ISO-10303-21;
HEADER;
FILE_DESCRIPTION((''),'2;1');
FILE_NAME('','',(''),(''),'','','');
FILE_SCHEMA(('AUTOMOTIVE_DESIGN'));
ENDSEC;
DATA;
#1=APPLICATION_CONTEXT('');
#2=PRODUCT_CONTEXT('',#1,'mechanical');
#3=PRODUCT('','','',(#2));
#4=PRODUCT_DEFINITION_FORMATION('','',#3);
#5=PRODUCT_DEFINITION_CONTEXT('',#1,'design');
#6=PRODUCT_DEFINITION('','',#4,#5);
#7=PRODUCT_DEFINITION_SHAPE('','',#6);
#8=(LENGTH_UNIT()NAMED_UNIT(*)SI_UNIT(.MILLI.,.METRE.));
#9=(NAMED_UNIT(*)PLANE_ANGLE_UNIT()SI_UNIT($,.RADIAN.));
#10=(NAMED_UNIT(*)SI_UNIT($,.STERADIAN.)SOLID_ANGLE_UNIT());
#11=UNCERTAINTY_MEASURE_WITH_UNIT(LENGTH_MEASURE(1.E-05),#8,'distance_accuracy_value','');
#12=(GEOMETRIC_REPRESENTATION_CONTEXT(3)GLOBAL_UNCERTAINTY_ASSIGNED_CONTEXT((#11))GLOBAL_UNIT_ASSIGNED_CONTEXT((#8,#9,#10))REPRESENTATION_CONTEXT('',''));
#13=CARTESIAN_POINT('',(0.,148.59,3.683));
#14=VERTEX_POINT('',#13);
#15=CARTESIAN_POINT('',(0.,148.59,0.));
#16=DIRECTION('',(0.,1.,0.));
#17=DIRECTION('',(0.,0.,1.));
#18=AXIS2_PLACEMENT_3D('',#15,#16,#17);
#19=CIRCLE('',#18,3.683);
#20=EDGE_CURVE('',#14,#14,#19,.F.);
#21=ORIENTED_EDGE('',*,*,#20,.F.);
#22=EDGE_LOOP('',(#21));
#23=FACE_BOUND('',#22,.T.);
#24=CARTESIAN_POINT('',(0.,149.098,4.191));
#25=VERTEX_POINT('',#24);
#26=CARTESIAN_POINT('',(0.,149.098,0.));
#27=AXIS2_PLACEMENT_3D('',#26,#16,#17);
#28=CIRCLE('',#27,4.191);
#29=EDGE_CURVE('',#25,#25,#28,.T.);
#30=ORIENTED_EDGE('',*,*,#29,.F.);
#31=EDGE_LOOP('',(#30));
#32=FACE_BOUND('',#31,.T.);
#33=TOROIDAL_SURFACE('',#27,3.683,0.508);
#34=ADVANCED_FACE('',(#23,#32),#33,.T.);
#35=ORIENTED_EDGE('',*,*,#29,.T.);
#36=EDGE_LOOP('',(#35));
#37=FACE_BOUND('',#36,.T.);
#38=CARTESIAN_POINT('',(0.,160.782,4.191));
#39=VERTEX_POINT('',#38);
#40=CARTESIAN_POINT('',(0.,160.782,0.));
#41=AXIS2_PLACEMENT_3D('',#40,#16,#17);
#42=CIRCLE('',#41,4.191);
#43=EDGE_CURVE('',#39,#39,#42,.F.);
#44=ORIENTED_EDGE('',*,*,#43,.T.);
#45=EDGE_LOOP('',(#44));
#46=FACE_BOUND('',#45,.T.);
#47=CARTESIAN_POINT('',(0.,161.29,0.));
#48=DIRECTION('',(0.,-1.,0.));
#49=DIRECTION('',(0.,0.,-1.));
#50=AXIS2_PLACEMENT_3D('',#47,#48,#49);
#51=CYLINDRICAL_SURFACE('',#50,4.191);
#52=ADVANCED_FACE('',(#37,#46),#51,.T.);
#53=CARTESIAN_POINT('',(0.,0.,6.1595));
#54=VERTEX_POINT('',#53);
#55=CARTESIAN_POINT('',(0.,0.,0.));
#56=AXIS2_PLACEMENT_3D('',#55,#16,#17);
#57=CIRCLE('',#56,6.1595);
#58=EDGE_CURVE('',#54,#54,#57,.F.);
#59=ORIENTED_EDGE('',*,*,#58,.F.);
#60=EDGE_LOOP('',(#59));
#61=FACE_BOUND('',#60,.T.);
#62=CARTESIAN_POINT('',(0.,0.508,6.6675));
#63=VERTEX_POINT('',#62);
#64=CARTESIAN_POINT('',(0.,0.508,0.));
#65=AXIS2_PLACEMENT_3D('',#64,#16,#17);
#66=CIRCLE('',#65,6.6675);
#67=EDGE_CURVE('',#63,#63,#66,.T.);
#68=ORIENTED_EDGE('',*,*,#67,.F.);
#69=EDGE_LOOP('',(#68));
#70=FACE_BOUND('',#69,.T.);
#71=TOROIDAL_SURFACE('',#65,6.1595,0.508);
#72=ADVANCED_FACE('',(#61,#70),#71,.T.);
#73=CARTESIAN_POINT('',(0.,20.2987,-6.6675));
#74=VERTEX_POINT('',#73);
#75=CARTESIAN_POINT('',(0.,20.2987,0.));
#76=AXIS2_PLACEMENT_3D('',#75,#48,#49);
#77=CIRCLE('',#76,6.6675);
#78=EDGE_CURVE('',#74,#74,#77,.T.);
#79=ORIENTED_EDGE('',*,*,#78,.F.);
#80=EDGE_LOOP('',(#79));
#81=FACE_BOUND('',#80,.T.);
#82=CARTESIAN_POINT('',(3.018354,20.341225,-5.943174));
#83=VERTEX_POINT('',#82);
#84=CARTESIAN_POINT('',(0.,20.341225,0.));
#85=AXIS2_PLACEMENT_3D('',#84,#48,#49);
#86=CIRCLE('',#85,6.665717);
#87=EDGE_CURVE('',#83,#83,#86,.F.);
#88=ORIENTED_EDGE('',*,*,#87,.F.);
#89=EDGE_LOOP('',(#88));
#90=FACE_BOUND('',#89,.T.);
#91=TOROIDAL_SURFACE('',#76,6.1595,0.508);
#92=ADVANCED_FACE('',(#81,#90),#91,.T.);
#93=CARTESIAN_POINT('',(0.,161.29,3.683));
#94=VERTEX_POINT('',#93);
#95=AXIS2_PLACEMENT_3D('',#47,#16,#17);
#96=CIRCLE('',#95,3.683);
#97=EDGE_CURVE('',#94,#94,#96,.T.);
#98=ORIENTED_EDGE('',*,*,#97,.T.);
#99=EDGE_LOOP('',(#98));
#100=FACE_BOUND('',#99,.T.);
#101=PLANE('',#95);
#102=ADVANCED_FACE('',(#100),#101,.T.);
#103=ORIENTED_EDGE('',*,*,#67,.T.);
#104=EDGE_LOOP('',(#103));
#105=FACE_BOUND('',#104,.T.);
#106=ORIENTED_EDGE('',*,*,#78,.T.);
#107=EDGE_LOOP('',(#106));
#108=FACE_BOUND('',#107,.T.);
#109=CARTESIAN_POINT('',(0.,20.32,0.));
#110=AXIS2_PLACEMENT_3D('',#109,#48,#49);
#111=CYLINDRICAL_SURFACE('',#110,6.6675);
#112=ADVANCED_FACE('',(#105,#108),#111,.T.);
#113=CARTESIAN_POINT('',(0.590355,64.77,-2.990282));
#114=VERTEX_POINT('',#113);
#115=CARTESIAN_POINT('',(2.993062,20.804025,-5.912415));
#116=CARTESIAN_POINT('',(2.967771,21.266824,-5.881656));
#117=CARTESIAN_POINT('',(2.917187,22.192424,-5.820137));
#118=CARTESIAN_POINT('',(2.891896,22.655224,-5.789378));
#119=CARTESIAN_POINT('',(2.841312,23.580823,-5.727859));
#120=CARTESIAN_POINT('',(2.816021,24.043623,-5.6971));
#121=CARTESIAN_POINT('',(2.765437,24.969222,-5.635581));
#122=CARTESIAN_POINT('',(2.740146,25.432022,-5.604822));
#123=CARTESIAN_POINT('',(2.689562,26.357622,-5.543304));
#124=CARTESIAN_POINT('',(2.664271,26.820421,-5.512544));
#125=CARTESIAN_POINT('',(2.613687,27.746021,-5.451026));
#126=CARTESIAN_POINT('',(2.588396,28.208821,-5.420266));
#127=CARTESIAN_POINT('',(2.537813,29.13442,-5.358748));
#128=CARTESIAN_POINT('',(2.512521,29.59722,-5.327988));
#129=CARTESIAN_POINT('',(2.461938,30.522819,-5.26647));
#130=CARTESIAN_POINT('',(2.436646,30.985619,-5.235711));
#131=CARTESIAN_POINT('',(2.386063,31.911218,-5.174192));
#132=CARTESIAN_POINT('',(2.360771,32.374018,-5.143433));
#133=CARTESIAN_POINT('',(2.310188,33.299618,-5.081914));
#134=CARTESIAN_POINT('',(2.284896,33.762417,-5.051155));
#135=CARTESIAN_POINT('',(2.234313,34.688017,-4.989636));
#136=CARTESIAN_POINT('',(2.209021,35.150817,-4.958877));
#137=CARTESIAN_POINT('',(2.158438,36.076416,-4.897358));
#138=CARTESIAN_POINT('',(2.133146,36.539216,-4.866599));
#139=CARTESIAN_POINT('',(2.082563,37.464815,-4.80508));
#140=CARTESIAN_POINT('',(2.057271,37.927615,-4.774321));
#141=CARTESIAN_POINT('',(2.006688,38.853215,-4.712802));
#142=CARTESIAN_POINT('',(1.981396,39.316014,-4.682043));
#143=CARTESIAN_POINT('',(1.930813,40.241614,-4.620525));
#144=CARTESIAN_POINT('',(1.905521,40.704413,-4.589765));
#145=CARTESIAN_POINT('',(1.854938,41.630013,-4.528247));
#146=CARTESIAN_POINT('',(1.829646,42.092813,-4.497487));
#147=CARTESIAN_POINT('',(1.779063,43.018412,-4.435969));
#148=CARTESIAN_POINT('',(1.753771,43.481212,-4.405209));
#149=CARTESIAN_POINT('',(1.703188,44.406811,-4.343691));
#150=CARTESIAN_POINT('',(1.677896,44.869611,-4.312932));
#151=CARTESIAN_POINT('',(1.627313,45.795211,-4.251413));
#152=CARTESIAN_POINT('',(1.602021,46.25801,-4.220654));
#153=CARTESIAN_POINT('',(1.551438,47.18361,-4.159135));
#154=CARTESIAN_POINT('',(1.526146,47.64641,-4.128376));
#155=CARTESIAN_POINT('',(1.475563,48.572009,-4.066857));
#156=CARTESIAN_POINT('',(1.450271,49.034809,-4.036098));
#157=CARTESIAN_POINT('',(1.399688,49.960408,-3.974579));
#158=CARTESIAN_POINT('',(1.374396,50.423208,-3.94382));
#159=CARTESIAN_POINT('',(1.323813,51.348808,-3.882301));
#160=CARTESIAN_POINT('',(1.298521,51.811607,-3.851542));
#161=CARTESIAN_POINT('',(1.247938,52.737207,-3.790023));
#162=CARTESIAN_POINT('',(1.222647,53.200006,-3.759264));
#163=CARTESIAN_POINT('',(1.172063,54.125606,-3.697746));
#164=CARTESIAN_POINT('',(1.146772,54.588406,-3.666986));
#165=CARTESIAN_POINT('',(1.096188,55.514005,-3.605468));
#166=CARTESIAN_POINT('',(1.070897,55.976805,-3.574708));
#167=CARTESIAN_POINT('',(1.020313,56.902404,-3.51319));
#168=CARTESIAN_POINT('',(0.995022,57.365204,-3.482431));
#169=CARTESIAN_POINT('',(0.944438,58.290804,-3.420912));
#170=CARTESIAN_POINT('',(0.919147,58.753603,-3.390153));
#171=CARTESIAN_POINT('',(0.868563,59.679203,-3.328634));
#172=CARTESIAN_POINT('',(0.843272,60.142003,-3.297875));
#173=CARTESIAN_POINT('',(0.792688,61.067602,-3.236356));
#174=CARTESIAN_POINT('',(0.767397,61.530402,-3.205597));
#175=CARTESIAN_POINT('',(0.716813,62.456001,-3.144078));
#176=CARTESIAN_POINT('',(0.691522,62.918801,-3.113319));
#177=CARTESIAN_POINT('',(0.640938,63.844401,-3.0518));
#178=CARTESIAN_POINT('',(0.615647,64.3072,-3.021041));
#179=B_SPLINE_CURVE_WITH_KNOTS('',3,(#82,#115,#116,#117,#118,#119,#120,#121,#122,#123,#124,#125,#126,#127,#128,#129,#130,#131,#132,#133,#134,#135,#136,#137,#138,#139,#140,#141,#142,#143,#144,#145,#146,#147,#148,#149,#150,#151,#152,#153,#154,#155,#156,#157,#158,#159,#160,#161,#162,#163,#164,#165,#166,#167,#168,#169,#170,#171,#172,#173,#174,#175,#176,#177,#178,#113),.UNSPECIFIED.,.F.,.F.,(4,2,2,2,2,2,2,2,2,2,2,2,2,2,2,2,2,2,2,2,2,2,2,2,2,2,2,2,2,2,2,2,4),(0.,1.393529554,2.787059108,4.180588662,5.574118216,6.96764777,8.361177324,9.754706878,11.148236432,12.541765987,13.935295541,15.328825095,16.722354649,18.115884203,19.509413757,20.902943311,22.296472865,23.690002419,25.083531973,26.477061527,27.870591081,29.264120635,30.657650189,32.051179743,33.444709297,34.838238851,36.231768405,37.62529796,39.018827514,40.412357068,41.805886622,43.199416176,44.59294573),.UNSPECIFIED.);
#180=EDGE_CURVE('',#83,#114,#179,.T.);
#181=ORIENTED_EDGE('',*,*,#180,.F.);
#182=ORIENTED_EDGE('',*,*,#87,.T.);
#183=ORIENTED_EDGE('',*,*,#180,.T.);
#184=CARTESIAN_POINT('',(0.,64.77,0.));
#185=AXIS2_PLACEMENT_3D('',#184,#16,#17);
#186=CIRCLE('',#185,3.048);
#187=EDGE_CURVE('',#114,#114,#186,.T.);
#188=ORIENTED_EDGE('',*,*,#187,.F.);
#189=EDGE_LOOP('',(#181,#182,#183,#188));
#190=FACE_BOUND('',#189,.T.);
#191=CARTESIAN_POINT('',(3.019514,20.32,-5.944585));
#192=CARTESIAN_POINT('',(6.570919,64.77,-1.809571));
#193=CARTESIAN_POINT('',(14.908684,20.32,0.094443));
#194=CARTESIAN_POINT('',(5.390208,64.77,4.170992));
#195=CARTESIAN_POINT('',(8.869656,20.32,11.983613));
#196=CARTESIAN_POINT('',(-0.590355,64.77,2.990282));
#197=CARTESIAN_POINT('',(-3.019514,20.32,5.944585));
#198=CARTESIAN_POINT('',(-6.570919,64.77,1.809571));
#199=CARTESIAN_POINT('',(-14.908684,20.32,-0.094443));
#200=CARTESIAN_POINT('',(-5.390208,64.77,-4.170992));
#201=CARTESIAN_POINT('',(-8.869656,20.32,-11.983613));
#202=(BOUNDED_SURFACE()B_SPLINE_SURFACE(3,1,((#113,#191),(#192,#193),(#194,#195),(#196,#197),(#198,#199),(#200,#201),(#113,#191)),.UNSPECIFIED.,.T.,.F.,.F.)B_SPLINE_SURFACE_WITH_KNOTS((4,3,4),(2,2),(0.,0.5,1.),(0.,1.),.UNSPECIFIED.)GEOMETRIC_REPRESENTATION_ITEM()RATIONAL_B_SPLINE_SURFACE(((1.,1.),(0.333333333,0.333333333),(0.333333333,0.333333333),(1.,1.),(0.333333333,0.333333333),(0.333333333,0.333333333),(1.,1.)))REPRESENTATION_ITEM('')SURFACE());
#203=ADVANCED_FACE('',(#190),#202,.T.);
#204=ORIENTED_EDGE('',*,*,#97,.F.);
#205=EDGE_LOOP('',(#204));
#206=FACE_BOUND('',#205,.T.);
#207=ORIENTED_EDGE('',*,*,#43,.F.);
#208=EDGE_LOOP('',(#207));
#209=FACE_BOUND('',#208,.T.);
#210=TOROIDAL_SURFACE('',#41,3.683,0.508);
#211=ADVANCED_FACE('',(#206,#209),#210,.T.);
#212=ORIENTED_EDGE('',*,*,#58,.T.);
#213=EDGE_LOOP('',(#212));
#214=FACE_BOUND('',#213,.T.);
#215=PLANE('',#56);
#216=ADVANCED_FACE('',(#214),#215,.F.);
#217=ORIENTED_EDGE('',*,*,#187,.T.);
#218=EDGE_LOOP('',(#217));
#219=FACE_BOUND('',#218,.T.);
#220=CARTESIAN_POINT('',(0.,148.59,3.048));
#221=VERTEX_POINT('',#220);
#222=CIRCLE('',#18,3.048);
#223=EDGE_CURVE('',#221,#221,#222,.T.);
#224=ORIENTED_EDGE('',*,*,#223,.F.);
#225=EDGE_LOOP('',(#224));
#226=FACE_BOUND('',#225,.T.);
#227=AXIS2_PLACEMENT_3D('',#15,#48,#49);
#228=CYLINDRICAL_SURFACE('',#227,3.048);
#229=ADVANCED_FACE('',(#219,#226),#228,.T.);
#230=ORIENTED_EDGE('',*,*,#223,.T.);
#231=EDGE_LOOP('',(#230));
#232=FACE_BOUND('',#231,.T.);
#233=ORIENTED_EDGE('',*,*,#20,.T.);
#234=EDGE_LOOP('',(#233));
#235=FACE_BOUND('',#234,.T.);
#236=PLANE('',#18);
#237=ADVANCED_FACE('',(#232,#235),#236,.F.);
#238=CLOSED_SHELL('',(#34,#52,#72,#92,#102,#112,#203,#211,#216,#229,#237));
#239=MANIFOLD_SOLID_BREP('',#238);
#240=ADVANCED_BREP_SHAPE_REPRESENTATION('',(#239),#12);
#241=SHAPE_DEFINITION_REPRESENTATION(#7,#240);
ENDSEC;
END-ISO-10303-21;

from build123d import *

# Parameters (mm, degrees)
SKETCH1_R           = 6.6675
BOSS_EXTRUDE1_DEPTH = 20.32
SKETCH4_R           = 3.048
BOSS_EXTRUDE2_DEPTH = 83.82
SKETCH5_R           = 4.191
BOSS_EXTRUDE3_DEPTH = 12.7
FILLET1_R           = 0.508


with BuildPart() as part:
    # Sketch1 → Boss-Extrude1 (new body)
    with BuildSketch(Plane(origin=(0, 0, 0), x_dir=(1, 0, 0), z_dir=(0, 1, 0))):
        with Locations(Location((0, 0, 0), (0, 0, 270))):
            Circle(SKETCH1_R)
    extrude(amount=BOSS_EXTRUDE1_DEPTH)

    # Loft1: read off the stored shape, not the designer's step
    # Loft1: loft between two sections, ruled curve by curve
    loft1_from = [
        Edge.make_bspline([(0.590355185, 64.77, -2.990281719), (6.570918622, 64.77, -1.809571349), (5.390208252, 64.77, 4.170992088), (-0.590355185, 64.77, 2.990281719), (-6.570918622, 64.77, 1.809571349), (-5.390208252, 64.77, -4.170992088), (0.590355185, 64.77, -2.990281719)], [0, 0, 0, 0, 0.5, 0.5, 0.5, 1, 1, 1, 1], 3, [1, 0.333333333, 0.333333333, 1, 0.333333333, 0.333333333, 1]),
    ]
    loft1_to = [
        Edge.make_bspline([(3.019513857, 20.32, -5.944585126), (14.908684109, 20.32, 0.094442589), (8.869656394, 20.32, 11.98361284), (-3.019513857, 20.32, 5.944585126), (-14.908684109, 20.32, -0.094442589), (-8.869656394, 20.32, -11.98361284), (3.019513857, 20.32, -5.944585126)], [0, 0, 0, 0, 0.5, 0.5, 0.5, 1, 1, 1, 1], 3, [1, 0.333333333, 0.333333333, 1, 0.333333333, 0.333333333, 1]),
    ]
    loft1 = Solid(Shell([*[Face.make_surface_from_curves(loft1_from[k], loft1_to[k]) for k in range(1)], Face(Wire(loft1_from)), Face(Wire(loft1_to))]))
    add(loft1)

    # Sketch4 → Boss-Extrude2 (add)
    with BuildSketch(Plane(origin=(0, 64.77, 0), x_dir=(1, 0, 0), z_dir=(0, 1, 0))):
        with Locations(Location((0, 0, 0), (0, 0, 78.832021496))):
            Circle(SKETCH4_R)
    extrude(amount=BOSS_EXTRUDE2_DEPTH)

    # Sketch5 → Boss-Extrude3 (add)
    with BuildSketch(Plane(origin=(0, 148.59, 0), x_dir=(1, 0, 0), z_dir=(0, 1, 0))):
        with Locations(Location((0, 0, 0), (0, 0, 270))):
            Circle(SKETCH5_R)
    extrude(amount=BOSS_EXTRUDE3_DEPTH)

    # Fillet1
    fillet1_edges = [part.edges().sort_by_distance(p)[0] for p in [
        (0, 148.59, -4.191),
        (0, 161.29, -4.191),
        (0, 0, -6.6675),
        (6.48425314, 20.32, 1.552423094),
    ]]
    fillet(fillet1_edges, radius=FILLET1_R)


solid = part.part
